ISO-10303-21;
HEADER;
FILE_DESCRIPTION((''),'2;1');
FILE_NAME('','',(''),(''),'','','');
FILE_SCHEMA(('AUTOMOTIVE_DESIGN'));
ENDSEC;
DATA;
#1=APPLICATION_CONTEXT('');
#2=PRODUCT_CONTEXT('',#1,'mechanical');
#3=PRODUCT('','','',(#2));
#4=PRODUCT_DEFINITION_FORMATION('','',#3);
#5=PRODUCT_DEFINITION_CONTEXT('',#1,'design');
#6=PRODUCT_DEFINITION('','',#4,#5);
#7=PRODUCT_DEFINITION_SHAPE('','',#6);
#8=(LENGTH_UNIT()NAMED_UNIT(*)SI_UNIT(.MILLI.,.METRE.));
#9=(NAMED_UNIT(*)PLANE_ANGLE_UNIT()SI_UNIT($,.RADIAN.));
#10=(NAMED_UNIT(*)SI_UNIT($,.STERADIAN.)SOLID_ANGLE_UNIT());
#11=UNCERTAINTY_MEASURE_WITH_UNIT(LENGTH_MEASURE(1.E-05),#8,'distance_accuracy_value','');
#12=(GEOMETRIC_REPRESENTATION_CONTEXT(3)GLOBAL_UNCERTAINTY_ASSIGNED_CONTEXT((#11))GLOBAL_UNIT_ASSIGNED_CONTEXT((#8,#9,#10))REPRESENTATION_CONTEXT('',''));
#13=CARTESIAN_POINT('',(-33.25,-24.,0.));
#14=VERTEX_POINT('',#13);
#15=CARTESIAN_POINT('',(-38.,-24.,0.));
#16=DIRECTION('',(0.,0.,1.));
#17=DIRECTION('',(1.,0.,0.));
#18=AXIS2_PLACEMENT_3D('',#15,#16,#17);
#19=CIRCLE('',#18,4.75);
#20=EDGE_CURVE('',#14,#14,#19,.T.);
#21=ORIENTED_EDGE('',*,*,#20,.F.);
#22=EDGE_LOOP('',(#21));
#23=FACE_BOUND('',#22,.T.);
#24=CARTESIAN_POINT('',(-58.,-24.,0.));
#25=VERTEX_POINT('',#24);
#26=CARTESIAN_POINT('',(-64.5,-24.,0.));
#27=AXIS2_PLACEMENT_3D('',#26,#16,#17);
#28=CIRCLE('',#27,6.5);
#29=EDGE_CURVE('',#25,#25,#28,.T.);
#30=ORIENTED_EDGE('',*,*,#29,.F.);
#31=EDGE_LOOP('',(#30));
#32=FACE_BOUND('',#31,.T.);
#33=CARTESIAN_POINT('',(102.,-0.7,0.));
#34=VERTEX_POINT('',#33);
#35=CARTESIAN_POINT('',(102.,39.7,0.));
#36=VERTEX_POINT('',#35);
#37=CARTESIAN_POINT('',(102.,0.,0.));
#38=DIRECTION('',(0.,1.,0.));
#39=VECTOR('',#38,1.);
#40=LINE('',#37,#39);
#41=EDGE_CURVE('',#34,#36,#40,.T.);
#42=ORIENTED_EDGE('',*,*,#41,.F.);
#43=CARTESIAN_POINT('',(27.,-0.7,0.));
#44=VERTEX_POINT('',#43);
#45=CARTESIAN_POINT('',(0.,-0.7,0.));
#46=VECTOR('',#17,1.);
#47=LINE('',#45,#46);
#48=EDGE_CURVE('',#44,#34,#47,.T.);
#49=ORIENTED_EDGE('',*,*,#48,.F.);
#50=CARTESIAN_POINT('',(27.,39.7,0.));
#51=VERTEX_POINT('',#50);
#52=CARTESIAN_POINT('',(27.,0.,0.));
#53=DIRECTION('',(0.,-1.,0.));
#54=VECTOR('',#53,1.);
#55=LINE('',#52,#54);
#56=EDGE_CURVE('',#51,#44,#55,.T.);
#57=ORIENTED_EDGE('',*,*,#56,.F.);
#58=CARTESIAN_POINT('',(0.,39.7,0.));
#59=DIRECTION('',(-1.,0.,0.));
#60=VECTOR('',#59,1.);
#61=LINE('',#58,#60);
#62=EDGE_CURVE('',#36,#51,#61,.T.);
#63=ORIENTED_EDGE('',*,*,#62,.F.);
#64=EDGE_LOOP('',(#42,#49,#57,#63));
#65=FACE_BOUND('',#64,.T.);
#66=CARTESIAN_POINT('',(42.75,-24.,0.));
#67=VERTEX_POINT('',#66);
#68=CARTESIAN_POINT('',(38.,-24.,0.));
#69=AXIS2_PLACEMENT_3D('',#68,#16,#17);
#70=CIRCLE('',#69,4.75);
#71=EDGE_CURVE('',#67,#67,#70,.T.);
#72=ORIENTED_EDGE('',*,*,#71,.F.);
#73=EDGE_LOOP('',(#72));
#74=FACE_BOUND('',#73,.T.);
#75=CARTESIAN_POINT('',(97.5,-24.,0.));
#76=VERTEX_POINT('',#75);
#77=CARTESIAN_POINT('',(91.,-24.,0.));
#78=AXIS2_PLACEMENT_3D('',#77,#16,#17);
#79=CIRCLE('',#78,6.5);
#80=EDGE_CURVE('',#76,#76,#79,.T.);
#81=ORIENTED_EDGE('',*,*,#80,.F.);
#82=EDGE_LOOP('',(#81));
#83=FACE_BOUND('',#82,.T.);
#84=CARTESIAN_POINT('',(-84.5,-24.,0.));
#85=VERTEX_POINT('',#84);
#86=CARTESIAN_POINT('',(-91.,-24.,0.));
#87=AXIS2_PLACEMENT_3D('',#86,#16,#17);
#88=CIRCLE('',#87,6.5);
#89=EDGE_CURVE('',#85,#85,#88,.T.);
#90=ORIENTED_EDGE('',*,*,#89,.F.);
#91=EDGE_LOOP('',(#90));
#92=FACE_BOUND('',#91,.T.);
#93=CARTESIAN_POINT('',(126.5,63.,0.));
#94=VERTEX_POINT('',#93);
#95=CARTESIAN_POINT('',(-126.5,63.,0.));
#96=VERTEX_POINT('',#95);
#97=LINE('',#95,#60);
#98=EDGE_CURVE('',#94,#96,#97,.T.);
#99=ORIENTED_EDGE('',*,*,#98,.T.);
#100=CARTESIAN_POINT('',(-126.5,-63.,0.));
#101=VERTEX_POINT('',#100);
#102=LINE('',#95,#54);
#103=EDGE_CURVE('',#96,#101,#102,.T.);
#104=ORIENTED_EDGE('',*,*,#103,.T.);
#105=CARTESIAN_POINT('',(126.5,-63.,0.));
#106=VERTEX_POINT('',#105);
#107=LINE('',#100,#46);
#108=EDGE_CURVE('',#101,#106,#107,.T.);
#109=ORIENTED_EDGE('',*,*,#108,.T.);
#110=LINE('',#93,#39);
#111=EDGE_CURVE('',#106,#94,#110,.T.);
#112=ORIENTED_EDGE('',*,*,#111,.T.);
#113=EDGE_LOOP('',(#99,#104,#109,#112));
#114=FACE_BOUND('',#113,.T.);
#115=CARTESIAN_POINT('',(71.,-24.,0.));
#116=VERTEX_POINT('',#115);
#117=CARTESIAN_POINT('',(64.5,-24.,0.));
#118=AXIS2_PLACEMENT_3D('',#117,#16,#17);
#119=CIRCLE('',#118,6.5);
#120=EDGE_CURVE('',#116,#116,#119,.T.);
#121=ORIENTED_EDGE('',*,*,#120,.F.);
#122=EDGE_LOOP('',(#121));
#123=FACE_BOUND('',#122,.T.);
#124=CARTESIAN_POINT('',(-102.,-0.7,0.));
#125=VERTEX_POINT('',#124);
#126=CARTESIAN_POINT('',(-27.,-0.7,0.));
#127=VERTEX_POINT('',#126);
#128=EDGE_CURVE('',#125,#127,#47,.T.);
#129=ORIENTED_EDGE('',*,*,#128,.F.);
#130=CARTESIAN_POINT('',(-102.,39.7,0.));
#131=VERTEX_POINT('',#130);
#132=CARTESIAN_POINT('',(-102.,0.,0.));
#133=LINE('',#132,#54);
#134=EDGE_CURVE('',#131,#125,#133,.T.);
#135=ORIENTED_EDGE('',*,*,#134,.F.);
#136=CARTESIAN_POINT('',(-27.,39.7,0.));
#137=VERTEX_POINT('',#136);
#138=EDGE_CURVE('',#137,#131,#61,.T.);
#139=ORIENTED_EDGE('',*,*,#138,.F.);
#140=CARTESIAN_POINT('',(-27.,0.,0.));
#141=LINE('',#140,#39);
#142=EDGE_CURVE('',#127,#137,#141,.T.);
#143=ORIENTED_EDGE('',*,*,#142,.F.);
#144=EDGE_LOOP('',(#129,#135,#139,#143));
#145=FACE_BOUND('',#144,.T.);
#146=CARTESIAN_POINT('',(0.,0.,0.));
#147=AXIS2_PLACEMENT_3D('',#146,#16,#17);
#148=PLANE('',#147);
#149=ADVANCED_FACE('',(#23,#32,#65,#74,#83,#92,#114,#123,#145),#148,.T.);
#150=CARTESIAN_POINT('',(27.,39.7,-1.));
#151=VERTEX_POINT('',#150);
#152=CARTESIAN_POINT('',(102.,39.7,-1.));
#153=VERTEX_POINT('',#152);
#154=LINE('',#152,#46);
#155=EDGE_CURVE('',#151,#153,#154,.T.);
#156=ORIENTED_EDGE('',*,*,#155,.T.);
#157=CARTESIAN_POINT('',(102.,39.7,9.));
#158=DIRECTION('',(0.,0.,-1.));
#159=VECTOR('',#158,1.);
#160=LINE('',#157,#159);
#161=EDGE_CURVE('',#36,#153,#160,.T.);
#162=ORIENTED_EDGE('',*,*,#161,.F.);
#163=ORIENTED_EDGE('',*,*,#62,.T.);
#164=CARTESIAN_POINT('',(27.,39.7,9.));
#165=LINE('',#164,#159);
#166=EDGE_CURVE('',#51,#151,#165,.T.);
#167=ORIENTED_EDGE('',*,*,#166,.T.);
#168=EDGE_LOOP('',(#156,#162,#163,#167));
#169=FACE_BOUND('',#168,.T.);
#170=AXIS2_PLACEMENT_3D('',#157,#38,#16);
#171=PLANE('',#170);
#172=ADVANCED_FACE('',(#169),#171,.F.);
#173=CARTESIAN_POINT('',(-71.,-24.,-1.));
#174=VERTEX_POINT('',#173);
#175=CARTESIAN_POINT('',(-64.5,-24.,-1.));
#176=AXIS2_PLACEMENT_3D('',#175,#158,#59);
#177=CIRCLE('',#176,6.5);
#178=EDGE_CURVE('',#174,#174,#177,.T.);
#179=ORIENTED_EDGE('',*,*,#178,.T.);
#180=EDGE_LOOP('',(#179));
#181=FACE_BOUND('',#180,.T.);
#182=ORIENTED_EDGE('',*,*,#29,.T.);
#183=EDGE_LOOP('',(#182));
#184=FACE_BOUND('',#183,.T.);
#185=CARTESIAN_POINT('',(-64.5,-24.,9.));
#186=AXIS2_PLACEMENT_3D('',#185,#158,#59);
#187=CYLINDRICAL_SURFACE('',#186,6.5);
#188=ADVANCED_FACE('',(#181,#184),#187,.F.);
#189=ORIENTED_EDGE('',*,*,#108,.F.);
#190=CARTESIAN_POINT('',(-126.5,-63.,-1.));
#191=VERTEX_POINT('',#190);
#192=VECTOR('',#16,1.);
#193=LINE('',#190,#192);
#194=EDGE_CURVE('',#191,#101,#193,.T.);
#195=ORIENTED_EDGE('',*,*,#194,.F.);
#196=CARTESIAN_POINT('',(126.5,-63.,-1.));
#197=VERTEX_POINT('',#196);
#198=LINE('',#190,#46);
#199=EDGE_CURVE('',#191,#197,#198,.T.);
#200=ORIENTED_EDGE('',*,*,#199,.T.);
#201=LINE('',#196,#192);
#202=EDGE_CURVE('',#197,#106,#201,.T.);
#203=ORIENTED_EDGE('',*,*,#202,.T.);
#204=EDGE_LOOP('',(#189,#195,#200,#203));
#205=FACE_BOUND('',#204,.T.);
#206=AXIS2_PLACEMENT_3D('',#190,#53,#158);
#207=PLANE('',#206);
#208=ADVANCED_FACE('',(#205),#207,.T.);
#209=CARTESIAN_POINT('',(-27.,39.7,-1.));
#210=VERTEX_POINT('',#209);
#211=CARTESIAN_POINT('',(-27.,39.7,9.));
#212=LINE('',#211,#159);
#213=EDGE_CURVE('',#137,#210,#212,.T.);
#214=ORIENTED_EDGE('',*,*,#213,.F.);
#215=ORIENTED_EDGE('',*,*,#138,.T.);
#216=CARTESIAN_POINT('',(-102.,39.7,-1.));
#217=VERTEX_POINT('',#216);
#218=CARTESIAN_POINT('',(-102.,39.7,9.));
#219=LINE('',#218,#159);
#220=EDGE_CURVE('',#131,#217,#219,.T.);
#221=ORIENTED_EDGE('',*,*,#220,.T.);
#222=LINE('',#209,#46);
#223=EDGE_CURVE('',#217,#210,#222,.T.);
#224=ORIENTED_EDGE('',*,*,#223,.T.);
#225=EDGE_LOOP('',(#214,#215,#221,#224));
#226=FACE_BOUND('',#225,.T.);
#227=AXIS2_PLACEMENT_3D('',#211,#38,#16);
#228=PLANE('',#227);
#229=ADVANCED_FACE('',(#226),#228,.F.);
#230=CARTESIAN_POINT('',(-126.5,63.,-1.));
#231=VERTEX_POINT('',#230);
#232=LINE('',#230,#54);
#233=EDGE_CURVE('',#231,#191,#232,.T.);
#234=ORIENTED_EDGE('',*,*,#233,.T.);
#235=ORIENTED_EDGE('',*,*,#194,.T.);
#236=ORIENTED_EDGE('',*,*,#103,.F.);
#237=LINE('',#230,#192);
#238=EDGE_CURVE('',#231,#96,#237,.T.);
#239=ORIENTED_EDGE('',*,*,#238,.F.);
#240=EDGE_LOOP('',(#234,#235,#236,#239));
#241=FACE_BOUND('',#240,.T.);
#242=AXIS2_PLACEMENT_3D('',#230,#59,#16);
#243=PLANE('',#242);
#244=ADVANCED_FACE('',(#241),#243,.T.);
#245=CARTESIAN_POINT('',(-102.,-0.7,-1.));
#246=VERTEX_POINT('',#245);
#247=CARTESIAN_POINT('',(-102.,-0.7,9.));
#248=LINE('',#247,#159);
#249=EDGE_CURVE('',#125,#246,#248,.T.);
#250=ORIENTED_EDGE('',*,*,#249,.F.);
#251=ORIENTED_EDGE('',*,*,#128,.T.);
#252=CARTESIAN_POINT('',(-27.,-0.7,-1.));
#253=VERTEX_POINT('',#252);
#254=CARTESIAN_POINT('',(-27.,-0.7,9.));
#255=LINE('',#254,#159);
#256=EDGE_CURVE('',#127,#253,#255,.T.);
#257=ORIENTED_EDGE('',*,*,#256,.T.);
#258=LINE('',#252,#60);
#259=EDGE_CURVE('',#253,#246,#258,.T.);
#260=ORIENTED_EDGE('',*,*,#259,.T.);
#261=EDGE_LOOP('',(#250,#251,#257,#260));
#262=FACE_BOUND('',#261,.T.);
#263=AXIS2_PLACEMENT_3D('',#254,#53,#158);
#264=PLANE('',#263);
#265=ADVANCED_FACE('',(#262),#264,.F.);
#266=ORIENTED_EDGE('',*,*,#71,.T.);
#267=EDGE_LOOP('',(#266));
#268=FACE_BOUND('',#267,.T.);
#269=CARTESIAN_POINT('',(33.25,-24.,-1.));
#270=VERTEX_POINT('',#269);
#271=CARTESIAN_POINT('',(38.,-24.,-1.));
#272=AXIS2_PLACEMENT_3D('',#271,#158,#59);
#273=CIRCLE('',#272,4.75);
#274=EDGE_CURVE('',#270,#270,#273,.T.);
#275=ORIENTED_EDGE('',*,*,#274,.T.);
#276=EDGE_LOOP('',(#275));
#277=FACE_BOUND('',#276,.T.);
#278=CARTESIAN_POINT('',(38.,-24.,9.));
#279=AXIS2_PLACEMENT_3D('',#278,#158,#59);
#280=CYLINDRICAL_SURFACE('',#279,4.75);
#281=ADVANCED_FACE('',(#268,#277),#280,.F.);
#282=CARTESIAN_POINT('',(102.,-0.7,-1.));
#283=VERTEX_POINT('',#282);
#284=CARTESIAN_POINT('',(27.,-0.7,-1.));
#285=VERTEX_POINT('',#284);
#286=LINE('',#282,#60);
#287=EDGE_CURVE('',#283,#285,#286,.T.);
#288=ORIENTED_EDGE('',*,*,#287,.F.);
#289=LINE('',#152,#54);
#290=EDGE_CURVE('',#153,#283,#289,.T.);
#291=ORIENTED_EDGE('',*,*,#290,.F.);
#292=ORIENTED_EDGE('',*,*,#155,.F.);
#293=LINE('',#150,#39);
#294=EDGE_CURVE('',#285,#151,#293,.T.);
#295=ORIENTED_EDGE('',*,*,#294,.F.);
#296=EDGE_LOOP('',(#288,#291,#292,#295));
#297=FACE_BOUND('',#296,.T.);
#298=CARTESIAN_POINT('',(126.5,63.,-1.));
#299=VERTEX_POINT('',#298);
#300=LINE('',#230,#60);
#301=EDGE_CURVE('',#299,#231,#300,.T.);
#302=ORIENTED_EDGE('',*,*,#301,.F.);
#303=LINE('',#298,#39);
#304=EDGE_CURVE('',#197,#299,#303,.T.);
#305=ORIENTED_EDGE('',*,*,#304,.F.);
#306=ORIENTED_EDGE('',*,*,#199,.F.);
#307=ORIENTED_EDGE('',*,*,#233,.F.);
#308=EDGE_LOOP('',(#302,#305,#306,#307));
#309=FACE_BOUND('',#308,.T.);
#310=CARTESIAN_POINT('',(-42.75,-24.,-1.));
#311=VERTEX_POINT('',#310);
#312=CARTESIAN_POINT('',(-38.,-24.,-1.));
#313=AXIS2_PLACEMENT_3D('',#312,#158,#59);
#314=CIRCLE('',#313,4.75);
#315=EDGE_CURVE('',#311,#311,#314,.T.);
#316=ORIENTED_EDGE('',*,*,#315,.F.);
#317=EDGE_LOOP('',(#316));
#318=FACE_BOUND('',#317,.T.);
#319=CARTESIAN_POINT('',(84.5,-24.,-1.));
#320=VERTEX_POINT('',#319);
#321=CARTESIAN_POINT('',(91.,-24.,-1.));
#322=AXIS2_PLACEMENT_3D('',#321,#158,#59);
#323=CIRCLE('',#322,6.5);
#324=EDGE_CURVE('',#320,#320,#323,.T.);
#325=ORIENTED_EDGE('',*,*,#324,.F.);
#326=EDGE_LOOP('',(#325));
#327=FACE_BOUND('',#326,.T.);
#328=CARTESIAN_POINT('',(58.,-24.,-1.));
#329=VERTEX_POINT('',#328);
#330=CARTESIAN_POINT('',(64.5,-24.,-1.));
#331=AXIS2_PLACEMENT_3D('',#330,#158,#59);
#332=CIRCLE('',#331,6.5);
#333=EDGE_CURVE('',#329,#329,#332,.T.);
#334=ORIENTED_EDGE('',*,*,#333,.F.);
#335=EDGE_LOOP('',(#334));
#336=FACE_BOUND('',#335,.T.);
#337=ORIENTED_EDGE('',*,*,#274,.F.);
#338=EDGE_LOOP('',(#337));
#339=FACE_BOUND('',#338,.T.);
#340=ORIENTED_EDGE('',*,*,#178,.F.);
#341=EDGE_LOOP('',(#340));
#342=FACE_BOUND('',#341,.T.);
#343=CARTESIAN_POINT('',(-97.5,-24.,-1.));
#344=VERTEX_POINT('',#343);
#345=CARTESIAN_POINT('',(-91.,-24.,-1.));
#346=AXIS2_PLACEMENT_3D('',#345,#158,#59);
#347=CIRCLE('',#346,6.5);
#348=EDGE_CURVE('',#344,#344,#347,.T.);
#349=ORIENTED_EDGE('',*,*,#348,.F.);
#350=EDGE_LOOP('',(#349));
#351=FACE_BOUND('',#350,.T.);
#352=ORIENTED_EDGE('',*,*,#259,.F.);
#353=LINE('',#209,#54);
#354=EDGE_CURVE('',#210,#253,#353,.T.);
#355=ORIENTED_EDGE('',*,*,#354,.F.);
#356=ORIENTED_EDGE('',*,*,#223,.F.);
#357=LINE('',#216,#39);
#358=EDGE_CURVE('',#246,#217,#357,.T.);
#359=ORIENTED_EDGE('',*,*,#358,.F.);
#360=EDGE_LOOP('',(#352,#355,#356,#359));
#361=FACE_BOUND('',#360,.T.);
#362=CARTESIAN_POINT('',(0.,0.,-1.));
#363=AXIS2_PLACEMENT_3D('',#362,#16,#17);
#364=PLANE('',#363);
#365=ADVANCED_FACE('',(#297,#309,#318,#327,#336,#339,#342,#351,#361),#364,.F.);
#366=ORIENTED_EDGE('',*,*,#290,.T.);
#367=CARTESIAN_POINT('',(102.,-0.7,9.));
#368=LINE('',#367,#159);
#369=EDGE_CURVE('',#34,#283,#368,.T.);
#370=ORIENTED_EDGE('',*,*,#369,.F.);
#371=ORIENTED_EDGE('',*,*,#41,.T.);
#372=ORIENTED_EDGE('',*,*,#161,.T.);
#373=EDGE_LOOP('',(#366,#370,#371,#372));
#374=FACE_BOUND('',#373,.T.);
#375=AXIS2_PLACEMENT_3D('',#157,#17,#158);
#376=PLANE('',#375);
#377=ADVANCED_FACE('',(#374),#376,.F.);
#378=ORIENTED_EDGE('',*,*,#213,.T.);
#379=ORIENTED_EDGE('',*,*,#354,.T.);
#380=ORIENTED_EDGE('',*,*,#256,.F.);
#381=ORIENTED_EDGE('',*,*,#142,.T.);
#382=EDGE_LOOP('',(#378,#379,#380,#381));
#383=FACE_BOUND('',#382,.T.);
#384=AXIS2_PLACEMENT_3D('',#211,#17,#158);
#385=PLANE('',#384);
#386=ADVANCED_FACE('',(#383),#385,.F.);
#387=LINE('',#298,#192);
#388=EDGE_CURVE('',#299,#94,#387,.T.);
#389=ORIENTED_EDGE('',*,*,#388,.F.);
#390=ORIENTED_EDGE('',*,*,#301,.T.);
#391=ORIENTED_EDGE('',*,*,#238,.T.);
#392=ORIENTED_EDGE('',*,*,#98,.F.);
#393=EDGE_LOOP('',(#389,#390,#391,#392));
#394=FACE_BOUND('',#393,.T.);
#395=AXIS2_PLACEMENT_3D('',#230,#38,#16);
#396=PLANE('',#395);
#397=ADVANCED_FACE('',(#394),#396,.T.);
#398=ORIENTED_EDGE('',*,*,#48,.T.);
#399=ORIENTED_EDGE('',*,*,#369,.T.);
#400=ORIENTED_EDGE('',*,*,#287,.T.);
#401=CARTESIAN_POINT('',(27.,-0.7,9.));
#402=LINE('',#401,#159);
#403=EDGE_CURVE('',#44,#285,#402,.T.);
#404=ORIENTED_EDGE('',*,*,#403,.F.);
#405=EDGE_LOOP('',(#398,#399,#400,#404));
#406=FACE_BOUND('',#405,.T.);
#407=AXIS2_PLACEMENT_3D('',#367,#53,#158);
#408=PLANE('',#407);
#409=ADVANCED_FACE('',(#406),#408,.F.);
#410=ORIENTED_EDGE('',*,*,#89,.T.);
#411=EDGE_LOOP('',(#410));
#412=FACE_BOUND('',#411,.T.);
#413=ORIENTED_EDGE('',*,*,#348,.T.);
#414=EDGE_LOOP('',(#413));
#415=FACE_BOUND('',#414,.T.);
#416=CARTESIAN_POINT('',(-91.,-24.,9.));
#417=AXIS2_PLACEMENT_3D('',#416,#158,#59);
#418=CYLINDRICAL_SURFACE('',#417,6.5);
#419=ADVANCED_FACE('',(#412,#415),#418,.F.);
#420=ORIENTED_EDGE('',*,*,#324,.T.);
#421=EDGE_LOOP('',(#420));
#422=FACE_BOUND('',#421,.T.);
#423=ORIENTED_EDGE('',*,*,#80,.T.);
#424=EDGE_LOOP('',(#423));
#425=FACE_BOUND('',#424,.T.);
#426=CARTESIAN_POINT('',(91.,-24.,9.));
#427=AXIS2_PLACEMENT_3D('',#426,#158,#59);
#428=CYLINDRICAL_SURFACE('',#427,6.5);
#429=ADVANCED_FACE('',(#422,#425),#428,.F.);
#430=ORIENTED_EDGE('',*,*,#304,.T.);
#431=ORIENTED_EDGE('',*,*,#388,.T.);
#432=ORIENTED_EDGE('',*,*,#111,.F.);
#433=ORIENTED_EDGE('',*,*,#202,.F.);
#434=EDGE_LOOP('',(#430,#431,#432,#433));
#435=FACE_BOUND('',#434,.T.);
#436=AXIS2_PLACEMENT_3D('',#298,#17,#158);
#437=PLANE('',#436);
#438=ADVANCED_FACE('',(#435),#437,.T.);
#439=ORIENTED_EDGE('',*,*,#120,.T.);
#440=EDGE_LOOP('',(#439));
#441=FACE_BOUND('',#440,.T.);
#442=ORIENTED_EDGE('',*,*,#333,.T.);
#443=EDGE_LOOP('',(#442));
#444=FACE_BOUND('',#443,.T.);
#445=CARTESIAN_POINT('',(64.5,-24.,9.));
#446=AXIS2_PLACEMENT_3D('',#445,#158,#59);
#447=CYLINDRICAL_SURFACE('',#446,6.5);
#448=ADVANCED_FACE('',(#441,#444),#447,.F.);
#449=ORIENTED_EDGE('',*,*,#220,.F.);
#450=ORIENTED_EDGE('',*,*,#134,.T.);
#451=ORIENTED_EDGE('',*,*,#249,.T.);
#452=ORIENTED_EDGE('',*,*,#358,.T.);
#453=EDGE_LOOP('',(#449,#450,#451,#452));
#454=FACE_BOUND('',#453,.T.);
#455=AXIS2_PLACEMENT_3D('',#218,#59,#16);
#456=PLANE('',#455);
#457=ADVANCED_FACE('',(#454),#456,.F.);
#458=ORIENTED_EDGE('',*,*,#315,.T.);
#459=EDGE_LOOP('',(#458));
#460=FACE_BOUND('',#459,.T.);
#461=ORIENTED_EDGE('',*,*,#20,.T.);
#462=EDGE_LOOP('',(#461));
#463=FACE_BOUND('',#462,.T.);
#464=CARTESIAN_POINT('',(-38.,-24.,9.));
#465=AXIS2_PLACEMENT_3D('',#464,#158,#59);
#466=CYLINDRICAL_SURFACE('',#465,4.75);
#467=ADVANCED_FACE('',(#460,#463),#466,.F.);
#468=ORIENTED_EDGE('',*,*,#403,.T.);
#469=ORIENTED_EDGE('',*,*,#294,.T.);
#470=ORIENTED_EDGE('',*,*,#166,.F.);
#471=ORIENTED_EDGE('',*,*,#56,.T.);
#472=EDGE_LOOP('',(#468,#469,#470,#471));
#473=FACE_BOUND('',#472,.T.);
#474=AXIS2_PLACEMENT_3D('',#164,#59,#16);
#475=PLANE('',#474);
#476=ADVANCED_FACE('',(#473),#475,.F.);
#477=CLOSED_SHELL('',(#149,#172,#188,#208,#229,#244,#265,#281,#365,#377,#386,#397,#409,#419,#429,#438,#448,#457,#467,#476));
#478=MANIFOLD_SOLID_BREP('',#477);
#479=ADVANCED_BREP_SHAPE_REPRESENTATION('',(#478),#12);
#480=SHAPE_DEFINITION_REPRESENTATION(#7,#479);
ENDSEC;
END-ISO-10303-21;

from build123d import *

# Parameters (mm, degrees)
SKETCH1_W          = 253
SKETCH1_H          = 126
BASE_FLANGE1_DEPTH = 1
SKETCH2_R          = 6.5
SKETCH2_R_2        = 4.75
SKETCH2_W          = 75
SKETCH2_H          = 40.400000001
SKETCH2_H_2        = 40.4
CUT_EXTRUDE1_DEPTH = 10


# Sheet-metal steps are written as plain solids
with BuildPart() as part:
    # Sketch1 → Base-Flange1 (new body)
    with BuildSketch(Plane.XY):
        Rectangle(SKETCH1_W, SKETCH1_H)
    extrude(amount=-BASE_FLANGE1_DEPTH)

    # Sketch2 → Cut-Extrude1 (cut)
    with BuildSketch(Plane(origin=(0, 0, -1), x_dir=(-1, 0, 0), z_dir=(0, 0, -1))):
        with Locations((-91, -24)):
            Circle(SKETCH2_R)
        with Locations((-64.5, -24)):
            Circle(SKETCH2_R)
        with Locations((64.5, -24)):
            Circle(SKETCH2_R)
        with Locations((91, -24)):
            Circle(SKETCH2_R)
        with Locations((-38, -24)):
            Circle(SKETCH2_R_2)
        with Locations((38, -24)):
            Circle(SKETCH2_R_2)
        with Locations((-64.5, 19.5)):
            Rectangle(SKETCH2_W, SKETCH2_H)
        with Locations((64.5, 19.5)):
            Rectangle(SKETCH2_W, SKETCH2_H_2)
    extrude(amount=-CUT_EXTRUDE1_DEPTH, mode=Mode.SUBTRACT)


solid = part.part
